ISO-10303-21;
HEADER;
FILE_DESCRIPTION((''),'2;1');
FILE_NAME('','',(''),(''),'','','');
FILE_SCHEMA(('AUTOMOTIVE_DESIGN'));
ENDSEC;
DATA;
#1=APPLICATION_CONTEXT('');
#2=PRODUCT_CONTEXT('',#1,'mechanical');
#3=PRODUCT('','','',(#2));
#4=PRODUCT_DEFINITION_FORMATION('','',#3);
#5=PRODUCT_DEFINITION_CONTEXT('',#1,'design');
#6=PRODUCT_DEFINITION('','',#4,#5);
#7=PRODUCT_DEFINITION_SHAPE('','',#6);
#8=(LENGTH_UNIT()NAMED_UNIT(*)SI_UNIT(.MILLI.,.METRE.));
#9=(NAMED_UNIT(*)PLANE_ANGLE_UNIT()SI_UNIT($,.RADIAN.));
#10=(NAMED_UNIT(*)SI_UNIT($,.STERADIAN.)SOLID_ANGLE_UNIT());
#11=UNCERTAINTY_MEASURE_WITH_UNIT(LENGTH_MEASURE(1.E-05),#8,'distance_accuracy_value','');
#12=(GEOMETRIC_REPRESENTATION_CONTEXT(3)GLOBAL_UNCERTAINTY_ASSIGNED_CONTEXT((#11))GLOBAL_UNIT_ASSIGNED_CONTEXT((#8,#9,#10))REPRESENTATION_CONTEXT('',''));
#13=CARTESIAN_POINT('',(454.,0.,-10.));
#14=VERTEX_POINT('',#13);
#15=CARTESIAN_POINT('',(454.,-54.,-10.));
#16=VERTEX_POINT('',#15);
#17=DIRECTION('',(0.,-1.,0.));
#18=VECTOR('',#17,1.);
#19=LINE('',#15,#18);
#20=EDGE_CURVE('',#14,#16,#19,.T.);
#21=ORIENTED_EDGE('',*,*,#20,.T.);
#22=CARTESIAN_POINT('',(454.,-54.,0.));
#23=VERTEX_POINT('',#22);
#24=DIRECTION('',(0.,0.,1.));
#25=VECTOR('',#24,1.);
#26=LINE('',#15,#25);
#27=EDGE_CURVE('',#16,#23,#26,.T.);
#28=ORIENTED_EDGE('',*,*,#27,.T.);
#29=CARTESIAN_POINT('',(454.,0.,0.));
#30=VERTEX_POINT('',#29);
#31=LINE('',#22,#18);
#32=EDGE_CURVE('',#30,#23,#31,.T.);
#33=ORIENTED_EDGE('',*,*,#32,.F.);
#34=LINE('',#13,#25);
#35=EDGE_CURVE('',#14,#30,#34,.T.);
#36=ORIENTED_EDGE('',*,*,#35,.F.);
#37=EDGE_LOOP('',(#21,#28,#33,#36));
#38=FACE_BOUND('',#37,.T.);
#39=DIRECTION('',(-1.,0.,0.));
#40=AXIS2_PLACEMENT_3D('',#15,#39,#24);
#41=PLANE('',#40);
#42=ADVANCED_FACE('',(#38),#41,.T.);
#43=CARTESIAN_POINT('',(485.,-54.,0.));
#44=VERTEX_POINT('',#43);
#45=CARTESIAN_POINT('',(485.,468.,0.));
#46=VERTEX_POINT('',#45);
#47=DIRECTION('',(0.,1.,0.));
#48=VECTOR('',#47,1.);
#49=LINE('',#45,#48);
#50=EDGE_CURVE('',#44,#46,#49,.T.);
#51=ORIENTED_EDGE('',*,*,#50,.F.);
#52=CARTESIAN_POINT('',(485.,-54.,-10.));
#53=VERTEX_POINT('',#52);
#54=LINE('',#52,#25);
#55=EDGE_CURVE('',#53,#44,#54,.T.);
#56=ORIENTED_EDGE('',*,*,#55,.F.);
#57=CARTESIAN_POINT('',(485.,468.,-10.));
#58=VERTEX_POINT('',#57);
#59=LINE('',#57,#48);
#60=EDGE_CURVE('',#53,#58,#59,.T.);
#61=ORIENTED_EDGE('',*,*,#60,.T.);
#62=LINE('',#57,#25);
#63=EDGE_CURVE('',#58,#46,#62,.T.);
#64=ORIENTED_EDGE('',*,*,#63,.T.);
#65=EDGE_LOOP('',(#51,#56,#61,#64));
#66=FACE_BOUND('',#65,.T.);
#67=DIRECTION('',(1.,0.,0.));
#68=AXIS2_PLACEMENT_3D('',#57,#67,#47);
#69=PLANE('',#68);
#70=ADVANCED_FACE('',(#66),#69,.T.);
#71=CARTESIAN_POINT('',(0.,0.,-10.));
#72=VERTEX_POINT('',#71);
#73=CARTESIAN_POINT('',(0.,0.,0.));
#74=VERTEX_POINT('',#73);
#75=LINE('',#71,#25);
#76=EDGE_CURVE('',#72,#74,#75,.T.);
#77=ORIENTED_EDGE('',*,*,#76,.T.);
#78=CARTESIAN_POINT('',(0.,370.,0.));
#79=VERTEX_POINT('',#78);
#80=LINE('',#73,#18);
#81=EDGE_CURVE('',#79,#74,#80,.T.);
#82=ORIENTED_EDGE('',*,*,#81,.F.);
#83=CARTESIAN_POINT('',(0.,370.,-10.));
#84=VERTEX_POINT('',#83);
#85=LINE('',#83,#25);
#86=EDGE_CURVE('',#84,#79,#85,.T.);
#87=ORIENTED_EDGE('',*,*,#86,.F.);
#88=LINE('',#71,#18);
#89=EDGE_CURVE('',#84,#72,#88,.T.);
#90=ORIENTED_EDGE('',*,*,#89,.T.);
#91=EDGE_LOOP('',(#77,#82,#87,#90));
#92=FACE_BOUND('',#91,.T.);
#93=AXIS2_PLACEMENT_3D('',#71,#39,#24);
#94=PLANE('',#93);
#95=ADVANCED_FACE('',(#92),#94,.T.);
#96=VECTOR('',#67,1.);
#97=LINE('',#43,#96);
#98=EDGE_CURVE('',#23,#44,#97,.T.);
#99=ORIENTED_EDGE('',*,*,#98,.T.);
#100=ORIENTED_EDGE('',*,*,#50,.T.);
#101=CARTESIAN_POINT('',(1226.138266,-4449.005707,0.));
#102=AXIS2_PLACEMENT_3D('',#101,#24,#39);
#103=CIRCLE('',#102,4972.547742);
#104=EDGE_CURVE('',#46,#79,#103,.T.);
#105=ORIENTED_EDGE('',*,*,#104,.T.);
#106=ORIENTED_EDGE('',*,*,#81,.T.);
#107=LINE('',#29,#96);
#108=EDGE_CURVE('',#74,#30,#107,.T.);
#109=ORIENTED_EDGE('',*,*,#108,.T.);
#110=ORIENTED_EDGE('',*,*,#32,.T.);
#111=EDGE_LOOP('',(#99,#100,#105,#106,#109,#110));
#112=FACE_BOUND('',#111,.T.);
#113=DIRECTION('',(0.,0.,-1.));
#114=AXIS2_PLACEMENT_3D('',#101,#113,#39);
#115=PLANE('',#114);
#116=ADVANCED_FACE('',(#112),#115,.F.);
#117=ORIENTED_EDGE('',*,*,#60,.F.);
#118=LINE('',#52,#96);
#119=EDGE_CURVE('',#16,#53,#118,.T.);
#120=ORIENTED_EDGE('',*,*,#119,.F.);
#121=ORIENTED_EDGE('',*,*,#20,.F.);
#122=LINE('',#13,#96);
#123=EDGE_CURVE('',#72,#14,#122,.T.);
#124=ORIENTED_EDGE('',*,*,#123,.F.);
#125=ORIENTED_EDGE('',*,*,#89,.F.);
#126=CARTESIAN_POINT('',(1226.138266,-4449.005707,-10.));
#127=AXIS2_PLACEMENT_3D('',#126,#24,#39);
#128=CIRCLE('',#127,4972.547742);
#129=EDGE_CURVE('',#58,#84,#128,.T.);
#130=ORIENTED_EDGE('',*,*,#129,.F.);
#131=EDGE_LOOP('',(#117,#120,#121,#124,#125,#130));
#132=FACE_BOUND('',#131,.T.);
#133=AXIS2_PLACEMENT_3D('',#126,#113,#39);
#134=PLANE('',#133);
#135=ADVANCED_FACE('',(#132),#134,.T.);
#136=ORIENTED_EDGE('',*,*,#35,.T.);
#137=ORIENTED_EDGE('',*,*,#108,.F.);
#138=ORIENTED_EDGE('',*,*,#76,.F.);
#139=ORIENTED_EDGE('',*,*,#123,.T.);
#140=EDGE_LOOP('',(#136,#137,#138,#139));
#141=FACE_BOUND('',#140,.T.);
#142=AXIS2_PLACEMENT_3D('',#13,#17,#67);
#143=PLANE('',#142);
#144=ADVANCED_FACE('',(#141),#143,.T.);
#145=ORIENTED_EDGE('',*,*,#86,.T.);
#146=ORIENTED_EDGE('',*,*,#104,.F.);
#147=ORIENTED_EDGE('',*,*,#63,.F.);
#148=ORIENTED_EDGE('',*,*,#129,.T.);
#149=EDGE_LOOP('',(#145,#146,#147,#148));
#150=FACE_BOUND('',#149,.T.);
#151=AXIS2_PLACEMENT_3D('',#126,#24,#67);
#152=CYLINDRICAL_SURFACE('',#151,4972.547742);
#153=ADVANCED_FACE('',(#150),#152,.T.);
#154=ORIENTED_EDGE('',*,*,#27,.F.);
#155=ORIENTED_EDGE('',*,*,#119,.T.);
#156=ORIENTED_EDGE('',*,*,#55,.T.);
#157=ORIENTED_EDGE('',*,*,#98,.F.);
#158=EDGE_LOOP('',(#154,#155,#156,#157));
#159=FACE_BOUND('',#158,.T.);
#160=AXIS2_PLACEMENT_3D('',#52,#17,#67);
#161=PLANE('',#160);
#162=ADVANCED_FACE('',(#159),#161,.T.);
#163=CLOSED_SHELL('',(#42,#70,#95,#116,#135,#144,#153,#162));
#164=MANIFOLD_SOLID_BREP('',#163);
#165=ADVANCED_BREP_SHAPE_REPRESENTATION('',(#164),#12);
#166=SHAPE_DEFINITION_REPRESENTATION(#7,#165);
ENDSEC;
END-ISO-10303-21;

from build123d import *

# Parameters (mm, degrees)
TABAN_FLAN_1_DEPTH = 10


# Sheet-metal steps are written as plain solids
with BuildPart() as part:
    # Çizim1 → Taban-Flanş1 (new body)
    with BuildSketch(Plane.XY):
        with BuildLine():
            Line((0, 0), (0, 370))
            ThreePointArc((0, 370), (241.280287234, 425.036333585), (485, 468))
            Line((485, 468), (485, -54))
            Line((485, -54), (454, -54))
            Line((454, -54), (454, 0))
            Line((454, 0), (0, 0))
        make_face()
    extrude(amount=-TABAN_FLAN_1_DEPTH)


solid = part.part
